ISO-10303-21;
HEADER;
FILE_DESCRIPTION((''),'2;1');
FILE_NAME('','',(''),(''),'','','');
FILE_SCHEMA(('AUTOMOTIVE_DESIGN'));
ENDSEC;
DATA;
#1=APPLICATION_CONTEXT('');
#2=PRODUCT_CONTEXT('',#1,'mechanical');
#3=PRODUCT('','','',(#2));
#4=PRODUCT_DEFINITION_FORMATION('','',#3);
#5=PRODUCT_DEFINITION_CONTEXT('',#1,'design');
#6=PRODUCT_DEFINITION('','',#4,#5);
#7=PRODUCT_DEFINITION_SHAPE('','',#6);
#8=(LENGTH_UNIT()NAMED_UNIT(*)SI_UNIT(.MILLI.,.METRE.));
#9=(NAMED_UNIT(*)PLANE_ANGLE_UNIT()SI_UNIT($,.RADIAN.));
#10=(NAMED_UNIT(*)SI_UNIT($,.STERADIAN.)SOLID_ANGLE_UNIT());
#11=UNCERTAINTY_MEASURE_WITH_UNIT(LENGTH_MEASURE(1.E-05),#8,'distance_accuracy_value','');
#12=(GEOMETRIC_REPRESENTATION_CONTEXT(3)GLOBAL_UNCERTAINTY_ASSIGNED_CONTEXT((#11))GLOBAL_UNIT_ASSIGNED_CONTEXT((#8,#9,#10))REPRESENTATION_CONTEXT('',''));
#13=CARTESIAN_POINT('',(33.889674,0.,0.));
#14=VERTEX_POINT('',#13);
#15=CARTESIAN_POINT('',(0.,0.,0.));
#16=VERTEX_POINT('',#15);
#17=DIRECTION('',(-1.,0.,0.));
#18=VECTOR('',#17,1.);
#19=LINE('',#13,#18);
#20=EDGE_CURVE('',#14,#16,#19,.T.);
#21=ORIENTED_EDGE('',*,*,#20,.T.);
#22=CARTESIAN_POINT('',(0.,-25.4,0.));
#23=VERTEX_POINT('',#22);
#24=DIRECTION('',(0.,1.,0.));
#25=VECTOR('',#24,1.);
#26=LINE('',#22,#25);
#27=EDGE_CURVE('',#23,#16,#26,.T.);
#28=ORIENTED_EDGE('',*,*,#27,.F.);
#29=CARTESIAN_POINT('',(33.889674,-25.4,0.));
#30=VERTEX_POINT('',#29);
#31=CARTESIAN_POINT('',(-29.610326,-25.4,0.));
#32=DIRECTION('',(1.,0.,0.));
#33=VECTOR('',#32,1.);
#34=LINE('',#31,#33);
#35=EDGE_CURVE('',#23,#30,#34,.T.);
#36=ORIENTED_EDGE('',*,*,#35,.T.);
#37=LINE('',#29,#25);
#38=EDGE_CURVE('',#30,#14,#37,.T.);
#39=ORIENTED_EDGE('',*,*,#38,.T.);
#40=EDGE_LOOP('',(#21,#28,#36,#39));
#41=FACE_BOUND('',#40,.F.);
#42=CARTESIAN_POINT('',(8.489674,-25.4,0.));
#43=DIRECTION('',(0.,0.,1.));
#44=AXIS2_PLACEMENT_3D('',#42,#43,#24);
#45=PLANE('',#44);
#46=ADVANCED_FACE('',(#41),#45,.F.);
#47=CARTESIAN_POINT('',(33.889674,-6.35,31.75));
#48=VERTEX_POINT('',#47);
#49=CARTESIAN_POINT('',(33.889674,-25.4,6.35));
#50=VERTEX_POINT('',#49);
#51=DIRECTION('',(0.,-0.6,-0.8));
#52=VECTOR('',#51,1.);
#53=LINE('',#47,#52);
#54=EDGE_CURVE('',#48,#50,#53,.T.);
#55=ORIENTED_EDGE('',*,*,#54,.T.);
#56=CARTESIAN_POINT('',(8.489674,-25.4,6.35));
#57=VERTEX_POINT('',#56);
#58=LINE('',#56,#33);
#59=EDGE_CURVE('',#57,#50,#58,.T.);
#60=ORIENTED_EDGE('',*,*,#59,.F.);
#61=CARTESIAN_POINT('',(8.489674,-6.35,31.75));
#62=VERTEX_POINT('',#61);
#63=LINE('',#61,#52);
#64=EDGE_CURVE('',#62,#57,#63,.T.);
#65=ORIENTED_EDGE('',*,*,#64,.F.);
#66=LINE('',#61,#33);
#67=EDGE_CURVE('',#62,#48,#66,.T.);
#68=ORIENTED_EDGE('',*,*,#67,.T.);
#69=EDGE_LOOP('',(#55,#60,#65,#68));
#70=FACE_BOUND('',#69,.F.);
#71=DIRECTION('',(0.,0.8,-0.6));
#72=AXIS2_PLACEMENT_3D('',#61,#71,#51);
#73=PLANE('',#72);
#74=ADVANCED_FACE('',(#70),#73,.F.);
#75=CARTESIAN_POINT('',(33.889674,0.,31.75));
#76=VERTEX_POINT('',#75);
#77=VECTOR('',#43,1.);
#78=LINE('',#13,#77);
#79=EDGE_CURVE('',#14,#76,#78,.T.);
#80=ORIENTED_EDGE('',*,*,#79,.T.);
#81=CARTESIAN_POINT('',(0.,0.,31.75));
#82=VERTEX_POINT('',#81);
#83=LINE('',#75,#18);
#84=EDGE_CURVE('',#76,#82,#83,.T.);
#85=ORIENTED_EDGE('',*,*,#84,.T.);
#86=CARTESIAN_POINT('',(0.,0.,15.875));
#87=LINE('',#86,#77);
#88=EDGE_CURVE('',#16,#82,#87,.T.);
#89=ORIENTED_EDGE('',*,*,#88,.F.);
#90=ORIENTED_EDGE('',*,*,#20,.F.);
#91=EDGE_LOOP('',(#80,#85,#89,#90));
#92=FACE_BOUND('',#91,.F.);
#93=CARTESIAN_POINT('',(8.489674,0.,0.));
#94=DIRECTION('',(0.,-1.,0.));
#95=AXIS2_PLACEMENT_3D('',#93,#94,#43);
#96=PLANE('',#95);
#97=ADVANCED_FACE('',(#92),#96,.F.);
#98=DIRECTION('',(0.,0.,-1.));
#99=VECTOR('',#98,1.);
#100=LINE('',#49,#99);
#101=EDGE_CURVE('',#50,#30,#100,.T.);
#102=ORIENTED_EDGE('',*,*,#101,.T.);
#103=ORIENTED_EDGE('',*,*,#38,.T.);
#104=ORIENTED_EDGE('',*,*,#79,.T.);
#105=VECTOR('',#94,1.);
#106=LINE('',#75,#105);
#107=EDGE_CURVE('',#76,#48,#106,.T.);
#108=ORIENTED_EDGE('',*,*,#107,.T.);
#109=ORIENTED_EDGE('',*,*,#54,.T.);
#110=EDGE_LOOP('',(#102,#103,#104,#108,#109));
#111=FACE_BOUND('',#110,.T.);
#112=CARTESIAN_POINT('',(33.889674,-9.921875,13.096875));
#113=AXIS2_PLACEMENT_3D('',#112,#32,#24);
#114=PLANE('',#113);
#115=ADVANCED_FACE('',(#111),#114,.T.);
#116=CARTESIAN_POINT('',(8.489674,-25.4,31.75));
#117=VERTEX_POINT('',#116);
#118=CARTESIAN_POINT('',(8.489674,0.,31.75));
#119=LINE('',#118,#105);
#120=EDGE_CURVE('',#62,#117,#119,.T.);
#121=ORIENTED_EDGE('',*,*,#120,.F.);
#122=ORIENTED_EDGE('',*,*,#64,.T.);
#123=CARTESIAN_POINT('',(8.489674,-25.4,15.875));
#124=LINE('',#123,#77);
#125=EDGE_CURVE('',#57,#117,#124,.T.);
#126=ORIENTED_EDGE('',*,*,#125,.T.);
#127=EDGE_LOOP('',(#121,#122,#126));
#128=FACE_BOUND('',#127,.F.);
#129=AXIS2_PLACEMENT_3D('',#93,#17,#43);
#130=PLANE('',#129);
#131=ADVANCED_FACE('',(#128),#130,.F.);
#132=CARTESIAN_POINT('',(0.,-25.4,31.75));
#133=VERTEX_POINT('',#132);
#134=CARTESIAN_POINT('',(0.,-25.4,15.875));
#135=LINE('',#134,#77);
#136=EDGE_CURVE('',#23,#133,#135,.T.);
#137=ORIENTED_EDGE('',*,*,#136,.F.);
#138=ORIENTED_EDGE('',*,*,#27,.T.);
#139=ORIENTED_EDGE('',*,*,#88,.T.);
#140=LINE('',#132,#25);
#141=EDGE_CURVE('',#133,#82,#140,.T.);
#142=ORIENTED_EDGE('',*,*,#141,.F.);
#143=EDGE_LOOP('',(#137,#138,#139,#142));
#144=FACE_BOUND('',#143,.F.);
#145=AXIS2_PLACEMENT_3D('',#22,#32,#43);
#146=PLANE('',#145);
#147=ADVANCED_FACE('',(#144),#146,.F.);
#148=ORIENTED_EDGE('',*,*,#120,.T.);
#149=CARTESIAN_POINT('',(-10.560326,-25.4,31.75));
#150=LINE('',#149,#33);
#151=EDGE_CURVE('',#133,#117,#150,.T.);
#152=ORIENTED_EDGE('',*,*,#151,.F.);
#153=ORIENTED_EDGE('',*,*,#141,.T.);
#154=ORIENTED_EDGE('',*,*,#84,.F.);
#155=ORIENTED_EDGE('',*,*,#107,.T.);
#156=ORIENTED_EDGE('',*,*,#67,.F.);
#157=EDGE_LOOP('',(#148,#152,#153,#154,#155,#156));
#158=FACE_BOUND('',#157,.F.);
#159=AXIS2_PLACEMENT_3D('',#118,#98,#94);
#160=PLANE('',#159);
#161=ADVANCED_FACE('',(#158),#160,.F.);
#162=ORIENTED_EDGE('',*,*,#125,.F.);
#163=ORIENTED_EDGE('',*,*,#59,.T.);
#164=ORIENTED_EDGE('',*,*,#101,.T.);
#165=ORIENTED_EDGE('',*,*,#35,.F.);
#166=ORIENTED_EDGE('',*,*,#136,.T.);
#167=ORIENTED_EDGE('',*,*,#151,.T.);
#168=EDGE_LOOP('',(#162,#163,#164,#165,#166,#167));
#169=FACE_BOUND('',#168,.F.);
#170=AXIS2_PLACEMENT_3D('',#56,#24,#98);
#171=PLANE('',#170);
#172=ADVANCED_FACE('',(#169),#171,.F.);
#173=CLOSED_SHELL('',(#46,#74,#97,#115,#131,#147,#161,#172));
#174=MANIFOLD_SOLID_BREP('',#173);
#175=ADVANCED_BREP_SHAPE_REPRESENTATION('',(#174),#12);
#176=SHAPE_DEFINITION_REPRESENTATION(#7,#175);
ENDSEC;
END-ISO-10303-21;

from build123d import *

# Parameters (mm, degrees)
F0_W     = 38.1
F0_H     = 31.75
F1_DEPTH = 25.4
F3_DEPTH = 25.4
F6_W     = 29.6103259988
F6_H     = 31.75
F7_DEPTH = 25.4


# Not quite as in the source:
# - a feature of the source that left no trace in its solid (it failed there, or was rolled back) is left out


with BuildPart() as f1:
    # F0 (on Front) → F1 (new body)
    with BuildSketch(Plane.XZ):
        with Locations((-10.5603259988, 15.875)):
            Rectangle(F0_W, F0_H)
    extrude(amount=F1_DEPTH)

    # F2 (on face) → F3 (join)
    with BuildSketch(Plane.YZ.offset(8.4896740012)):
        Polygon((-6.35, 31.75), (-25.4, 6.35), (-25.4, 0), (0, 0), (0, 31.75), align=None)
    extrude(amount=F3_DEPTH)

    # F6 (on face) → F7 (cut)
    with BuildSketch(Plane.XZ.offset(25.4)):
        with Locations((-14.8051629994, 15.875)):
            Rectangle(F6_W, F6_H)
    extrude(amount=-F7_DEPTH, mode=Mode.SUBTRACT)


solid = f1.part
